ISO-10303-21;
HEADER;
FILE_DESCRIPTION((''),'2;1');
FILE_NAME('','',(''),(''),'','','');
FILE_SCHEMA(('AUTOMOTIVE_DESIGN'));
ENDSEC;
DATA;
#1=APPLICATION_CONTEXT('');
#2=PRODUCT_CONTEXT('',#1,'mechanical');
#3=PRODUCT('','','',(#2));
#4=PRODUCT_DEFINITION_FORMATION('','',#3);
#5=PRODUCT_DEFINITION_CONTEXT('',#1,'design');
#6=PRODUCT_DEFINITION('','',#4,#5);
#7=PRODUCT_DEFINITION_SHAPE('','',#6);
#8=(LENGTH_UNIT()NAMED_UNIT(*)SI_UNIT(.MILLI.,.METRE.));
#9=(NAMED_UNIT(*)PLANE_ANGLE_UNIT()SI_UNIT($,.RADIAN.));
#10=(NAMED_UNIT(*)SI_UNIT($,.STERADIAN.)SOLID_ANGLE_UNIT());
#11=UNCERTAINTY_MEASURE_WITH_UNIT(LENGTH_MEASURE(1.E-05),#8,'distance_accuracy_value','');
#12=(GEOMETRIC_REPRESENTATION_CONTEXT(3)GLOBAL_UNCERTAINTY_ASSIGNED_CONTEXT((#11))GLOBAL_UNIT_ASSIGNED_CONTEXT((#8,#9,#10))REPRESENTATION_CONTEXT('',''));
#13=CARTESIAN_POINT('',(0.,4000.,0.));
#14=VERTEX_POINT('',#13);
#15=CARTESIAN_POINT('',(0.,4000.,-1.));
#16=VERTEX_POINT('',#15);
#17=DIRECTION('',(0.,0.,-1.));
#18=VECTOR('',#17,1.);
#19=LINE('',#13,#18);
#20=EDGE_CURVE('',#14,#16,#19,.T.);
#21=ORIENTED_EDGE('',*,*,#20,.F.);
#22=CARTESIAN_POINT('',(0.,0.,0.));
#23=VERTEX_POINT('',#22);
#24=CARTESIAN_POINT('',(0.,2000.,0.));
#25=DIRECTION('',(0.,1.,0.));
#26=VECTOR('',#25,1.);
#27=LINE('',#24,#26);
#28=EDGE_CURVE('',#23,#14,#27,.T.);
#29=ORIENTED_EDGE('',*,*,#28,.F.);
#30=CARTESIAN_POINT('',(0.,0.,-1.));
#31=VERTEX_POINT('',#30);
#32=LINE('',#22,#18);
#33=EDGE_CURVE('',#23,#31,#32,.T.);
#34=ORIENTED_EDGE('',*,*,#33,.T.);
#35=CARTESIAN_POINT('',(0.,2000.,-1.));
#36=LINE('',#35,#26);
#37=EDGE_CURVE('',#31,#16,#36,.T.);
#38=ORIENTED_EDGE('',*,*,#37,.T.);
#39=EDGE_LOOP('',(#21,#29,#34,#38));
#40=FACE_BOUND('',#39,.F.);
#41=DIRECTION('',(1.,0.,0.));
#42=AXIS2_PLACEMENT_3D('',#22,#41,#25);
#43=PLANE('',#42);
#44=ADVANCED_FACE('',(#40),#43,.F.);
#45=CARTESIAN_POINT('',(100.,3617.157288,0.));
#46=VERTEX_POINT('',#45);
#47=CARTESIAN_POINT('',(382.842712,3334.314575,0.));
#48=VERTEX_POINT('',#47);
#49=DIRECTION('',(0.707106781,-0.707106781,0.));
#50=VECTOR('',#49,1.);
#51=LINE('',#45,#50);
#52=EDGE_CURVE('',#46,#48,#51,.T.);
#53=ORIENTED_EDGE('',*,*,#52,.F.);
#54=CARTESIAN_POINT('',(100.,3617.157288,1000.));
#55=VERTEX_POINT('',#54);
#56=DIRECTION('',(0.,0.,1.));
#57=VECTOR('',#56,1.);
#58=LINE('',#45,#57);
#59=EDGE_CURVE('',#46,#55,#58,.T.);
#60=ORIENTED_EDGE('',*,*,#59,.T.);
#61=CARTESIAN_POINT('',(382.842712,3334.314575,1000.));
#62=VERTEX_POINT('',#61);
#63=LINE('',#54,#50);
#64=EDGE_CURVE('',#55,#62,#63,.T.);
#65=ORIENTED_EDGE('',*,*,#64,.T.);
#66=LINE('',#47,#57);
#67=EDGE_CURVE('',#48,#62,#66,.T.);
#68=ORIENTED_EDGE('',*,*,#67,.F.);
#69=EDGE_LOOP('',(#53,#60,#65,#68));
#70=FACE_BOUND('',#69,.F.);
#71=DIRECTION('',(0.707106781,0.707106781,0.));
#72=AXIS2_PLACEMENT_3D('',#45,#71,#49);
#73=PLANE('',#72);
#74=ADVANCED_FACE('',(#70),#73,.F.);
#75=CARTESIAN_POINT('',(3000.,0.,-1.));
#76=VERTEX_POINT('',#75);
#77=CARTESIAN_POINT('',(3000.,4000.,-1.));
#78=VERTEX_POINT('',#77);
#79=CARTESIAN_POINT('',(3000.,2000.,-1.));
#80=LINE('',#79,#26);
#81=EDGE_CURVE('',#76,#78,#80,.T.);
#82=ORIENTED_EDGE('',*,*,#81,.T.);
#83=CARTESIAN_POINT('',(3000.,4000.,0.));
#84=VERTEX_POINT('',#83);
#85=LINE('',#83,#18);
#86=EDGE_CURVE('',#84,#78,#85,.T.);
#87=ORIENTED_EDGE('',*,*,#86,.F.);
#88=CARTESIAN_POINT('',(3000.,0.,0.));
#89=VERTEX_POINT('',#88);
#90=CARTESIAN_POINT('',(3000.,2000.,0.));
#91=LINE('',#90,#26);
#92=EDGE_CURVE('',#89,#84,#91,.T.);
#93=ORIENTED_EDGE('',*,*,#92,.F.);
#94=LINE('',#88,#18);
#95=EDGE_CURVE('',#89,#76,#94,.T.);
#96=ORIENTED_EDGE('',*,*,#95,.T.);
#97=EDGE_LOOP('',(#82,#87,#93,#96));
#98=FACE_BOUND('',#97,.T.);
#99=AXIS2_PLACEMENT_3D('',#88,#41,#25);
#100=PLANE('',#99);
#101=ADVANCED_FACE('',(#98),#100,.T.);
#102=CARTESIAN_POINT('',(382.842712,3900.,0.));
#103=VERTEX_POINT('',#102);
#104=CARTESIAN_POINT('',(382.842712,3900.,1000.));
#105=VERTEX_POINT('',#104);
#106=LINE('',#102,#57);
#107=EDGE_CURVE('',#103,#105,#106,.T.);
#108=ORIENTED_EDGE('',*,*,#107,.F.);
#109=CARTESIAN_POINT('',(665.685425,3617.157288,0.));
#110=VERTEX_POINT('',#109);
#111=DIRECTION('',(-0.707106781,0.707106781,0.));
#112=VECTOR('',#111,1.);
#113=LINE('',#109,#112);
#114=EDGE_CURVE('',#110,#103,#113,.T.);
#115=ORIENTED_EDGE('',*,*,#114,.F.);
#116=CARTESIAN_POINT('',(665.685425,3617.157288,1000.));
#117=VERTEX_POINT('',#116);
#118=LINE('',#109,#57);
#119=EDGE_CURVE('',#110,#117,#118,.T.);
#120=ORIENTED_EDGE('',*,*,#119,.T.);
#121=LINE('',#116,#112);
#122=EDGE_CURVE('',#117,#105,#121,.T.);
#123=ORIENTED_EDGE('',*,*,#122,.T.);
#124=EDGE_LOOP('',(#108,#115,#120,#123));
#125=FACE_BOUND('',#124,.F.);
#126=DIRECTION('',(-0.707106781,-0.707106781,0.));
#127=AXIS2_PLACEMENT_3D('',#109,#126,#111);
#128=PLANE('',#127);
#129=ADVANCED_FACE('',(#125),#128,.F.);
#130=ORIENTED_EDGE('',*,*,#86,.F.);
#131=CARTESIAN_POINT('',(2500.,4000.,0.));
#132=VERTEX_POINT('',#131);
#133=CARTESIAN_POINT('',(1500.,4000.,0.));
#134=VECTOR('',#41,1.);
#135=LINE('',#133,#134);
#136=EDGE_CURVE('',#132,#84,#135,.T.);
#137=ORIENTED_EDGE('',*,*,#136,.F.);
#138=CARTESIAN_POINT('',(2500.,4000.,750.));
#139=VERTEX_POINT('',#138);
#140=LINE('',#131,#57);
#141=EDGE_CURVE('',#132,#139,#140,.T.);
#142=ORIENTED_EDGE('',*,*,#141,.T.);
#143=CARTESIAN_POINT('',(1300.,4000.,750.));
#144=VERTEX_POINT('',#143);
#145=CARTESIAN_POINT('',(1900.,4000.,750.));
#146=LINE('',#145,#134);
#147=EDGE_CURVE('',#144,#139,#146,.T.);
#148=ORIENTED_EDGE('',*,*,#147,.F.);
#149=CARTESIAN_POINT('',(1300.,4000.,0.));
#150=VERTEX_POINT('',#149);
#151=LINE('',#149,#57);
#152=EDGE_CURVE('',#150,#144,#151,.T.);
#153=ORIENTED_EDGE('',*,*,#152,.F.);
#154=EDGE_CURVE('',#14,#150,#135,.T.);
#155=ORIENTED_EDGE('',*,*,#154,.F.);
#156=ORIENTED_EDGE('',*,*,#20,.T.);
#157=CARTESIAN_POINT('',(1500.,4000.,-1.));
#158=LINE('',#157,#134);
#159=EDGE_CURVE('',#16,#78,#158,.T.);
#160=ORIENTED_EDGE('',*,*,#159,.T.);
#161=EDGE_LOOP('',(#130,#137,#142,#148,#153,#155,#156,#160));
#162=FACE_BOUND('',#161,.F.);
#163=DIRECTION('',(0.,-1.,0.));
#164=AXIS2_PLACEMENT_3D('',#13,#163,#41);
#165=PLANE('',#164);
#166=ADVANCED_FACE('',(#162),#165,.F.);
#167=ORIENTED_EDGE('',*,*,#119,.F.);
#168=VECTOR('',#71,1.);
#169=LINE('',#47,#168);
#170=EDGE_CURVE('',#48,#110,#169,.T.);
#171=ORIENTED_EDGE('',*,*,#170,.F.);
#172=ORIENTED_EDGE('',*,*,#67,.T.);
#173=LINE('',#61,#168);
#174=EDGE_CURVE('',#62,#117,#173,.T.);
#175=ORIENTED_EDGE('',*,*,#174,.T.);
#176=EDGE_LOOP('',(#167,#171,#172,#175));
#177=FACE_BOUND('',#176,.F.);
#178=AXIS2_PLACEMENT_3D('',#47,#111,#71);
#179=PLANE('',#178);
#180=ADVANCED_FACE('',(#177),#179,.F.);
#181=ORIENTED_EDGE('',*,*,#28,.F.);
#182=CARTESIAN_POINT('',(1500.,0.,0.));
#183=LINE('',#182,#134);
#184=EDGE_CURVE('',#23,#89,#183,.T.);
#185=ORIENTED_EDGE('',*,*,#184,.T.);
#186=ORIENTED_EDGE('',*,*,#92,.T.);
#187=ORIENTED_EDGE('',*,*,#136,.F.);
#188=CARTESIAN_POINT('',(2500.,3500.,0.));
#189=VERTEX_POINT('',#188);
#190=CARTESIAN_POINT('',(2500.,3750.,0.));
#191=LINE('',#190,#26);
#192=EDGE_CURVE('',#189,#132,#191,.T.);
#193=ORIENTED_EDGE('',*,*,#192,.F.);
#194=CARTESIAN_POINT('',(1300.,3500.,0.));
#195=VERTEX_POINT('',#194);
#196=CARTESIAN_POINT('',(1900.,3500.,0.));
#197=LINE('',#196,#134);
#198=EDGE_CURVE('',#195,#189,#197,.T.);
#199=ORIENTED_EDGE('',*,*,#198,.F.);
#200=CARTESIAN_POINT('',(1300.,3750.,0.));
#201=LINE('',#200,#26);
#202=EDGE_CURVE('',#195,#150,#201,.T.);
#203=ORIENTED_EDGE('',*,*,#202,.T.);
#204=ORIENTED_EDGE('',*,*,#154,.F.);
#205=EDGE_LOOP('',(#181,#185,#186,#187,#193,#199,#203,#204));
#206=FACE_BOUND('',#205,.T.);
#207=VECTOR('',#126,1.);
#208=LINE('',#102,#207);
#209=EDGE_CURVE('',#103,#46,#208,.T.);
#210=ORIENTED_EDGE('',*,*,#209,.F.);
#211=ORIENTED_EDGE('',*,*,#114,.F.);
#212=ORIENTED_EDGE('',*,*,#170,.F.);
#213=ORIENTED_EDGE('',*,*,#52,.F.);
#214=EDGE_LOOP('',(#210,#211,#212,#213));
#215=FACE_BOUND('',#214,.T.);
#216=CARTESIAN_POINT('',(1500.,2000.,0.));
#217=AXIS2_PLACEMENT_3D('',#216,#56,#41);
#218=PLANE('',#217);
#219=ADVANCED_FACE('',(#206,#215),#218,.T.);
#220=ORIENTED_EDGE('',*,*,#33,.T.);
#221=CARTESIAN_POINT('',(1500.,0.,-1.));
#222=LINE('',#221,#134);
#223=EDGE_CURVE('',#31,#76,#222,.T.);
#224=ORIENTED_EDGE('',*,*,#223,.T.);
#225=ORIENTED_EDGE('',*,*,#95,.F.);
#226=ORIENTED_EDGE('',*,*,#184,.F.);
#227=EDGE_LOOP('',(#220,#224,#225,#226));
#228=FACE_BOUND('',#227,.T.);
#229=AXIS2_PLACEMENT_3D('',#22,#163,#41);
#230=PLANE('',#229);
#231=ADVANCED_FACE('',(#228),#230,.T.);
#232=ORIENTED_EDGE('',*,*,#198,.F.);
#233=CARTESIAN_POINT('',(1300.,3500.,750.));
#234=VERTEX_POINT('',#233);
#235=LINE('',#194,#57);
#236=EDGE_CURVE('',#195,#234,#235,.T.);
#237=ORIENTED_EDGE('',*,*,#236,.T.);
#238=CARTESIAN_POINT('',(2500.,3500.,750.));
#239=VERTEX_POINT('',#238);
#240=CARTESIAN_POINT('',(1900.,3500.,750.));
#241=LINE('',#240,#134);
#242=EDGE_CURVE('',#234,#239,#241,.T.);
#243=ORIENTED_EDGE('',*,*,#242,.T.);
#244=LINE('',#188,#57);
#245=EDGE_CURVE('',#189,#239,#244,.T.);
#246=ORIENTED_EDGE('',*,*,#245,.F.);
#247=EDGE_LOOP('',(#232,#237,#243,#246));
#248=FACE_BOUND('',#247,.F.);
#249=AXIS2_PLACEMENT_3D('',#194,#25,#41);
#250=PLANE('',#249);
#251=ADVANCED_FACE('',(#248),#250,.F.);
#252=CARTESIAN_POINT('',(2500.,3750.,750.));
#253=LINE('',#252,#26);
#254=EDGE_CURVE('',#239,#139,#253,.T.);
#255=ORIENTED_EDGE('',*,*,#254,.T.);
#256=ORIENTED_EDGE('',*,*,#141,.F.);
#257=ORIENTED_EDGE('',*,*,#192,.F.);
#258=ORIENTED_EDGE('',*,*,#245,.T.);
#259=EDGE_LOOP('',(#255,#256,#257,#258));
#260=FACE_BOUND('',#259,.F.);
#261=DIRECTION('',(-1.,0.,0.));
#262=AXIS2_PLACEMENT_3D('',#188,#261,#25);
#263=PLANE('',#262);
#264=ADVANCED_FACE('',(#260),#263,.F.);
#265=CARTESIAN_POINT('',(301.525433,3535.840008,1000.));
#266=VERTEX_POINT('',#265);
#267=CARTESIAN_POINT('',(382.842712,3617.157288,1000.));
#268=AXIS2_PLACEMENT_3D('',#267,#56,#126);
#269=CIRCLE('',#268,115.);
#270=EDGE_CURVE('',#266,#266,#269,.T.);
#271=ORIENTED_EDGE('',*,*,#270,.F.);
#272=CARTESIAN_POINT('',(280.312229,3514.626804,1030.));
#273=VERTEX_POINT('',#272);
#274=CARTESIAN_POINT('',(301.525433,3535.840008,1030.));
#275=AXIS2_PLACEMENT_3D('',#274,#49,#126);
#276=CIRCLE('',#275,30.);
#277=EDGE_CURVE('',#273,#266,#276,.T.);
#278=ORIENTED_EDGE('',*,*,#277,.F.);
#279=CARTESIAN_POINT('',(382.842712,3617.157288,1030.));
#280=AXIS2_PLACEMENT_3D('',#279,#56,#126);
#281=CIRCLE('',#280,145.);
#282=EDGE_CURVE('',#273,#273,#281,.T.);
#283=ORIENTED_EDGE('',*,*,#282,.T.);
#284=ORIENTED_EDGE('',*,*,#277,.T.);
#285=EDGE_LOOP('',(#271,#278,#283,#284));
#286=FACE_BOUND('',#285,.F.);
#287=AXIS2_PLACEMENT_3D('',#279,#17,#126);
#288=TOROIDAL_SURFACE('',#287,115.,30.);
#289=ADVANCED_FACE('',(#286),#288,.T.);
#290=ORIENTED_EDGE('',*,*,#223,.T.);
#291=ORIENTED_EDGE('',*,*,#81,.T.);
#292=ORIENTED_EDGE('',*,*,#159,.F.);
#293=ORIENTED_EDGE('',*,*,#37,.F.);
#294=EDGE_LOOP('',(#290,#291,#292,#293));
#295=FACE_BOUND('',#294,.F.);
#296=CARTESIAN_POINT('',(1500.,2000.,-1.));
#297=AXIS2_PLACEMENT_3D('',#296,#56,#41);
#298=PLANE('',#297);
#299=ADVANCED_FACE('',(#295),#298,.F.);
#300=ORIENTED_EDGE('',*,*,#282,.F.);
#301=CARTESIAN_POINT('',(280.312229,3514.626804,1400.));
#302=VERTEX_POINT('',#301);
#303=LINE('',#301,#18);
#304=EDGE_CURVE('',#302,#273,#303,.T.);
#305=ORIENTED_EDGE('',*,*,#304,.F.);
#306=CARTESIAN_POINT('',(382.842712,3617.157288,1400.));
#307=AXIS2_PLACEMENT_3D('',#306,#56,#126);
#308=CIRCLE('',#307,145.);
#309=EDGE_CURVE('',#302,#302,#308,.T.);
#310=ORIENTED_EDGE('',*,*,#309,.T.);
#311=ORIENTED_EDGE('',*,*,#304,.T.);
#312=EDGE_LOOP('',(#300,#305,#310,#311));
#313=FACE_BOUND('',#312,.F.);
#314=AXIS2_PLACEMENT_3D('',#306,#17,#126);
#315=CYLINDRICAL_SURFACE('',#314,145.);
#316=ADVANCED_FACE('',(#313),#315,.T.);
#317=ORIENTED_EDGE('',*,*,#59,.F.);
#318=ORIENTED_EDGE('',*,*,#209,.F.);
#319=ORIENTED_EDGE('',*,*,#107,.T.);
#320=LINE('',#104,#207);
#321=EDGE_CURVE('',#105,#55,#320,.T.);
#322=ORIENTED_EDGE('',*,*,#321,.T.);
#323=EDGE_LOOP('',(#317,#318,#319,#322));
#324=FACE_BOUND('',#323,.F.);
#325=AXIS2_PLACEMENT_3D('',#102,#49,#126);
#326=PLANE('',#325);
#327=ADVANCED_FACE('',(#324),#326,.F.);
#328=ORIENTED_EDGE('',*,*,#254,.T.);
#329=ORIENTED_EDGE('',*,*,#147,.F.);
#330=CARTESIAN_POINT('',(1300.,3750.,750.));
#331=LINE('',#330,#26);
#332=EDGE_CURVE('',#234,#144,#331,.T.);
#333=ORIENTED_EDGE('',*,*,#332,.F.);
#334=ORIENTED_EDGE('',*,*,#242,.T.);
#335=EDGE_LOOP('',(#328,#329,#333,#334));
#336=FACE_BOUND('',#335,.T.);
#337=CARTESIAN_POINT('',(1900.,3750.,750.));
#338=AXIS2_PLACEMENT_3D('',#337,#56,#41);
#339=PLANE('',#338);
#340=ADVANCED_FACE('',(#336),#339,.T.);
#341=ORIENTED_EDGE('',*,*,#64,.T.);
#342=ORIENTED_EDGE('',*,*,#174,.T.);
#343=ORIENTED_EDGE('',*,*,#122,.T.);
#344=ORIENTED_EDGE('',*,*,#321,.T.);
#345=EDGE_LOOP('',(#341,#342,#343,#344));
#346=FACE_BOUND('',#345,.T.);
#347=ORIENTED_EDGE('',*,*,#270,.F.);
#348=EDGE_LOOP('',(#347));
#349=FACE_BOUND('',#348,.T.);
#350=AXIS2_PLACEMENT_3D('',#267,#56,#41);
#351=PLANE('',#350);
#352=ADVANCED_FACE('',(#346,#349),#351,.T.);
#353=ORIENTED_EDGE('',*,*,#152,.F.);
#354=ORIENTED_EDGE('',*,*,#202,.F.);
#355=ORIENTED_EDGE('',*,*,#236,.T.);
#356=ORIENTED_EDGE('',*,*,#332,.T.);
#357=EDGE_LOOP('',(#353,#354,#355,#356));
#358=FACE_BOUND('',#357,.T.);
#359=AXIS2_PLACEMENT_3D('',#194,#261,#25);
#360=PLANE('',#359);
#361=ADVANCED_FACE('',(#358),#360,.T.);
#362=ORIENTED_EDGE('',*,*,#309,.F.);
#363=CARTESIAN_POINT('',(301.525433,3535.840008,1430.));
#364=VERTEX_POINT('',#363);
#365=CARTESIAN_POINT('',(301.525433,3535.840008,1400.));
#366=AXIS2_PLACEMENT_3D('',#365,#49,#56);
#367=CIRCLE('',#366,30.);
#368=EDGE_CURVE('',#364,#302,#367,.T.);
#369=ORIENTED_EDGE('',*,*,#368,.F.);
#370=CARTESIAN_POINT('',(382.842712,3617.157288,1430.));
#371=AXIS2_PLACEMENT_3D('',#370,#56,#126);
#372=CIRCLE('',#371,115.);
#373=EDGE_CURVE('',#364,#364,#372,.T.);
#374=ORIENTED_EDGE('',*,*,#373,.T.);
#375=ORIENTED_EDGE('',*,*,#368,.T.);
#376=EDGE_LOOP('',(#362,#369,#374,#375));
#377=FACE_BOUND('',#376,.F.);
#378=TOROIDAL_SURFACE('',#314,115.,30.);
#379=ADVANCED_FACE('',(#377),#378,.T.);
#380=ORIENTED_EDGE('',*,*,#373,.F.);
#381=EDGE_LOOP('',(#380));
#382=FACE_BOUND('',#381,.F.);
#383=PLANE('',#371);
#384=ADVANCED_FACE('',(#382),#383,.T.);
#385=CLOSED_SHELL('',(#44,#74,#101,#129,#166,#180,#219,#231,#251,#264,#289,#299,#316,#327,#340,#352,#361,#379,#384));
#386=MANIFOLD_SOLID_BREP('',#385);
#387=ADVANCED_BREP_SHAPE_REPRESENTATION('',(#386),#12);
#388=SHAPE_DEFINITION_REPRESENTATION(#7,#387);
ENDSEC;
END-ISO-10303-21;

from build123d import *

# Parameters (mm, degrees)
F0_W     = 3000
F0_H     = 4000
F2_DEPTH = 1
F5_DEPTH = 1000
F3_W     = 1200
F3_H     = 500
F6_DEPTH = 750


# Not quite as in the source:
# - the program builds the solid bodies; features that only make, move or delete a surface that nothing else refers to are left out


with BuildPart() as f2:
    # F0 (on Top) → F2 (new body)
    with BuildSketch(Plane.XY):
        with Locations((1500, 2000)):
            Rectangle(F0_W, F0_H)
    extrude(amount=-F2_DEPTH)

    # F4 (on Top) → F5 (join)
    with BuildSketch(Plane.XY):
        Polygon((665.6854249492, 3617.1572875254), (382.8427124746, 3900), (100, 3617.1572875254), (382.8427124746, 3334.3145750508), align=None)
    extrude(amount=F5_DEPTH)

    # F3 (on face) → F6 (join)
    with BuildSketch(Plane.XY):
        with Locations((1900, 3750)):
            Rectangle(F3_W, F3_H)
    extrude(amount=F6_DEPTH)

    # F8 (on offset) → F9 (revolve)
    with BuildSketch(Plane(origin=(-1617.1572875254, 1617.1572875254, 0), x_dir=(0.7071067812, 0.7071067812, 0), z_dir=(0.7071067812, -0.7071067812, 0))):
        with BuildLine():
            Line((2803.4271247462, 900), (2828.4271247462, 900))
            Line((2828.4271247462, 900), (2828.4271247462, 1430))
            Line((2828.4271247462, 1430), (2713.4271247462, 1430))
            ThreePointArc((2713.4271247462, 1430), (2692.2139213106, 1421.2132034356), (2683.4271247462, 1400))
            Line((2683.4271247462, 1400), (2683.4271247462, 1030))
            ThreePointArc((2683.4271247462, 1030), (2692.2139213106, 1008.7867965644), (2713.4271247462, 1000))
            Line((2713.4271247462, 1000), (2803.4271247462, 1000))
            Line((2803.4271247462, 1000), (2803.4271247462, 900))
        make_face()
    revolve(axis=Axis((382.8427124746, 3617.1572875254, 1165), (0, 0, 1)))


solid = f2.part
